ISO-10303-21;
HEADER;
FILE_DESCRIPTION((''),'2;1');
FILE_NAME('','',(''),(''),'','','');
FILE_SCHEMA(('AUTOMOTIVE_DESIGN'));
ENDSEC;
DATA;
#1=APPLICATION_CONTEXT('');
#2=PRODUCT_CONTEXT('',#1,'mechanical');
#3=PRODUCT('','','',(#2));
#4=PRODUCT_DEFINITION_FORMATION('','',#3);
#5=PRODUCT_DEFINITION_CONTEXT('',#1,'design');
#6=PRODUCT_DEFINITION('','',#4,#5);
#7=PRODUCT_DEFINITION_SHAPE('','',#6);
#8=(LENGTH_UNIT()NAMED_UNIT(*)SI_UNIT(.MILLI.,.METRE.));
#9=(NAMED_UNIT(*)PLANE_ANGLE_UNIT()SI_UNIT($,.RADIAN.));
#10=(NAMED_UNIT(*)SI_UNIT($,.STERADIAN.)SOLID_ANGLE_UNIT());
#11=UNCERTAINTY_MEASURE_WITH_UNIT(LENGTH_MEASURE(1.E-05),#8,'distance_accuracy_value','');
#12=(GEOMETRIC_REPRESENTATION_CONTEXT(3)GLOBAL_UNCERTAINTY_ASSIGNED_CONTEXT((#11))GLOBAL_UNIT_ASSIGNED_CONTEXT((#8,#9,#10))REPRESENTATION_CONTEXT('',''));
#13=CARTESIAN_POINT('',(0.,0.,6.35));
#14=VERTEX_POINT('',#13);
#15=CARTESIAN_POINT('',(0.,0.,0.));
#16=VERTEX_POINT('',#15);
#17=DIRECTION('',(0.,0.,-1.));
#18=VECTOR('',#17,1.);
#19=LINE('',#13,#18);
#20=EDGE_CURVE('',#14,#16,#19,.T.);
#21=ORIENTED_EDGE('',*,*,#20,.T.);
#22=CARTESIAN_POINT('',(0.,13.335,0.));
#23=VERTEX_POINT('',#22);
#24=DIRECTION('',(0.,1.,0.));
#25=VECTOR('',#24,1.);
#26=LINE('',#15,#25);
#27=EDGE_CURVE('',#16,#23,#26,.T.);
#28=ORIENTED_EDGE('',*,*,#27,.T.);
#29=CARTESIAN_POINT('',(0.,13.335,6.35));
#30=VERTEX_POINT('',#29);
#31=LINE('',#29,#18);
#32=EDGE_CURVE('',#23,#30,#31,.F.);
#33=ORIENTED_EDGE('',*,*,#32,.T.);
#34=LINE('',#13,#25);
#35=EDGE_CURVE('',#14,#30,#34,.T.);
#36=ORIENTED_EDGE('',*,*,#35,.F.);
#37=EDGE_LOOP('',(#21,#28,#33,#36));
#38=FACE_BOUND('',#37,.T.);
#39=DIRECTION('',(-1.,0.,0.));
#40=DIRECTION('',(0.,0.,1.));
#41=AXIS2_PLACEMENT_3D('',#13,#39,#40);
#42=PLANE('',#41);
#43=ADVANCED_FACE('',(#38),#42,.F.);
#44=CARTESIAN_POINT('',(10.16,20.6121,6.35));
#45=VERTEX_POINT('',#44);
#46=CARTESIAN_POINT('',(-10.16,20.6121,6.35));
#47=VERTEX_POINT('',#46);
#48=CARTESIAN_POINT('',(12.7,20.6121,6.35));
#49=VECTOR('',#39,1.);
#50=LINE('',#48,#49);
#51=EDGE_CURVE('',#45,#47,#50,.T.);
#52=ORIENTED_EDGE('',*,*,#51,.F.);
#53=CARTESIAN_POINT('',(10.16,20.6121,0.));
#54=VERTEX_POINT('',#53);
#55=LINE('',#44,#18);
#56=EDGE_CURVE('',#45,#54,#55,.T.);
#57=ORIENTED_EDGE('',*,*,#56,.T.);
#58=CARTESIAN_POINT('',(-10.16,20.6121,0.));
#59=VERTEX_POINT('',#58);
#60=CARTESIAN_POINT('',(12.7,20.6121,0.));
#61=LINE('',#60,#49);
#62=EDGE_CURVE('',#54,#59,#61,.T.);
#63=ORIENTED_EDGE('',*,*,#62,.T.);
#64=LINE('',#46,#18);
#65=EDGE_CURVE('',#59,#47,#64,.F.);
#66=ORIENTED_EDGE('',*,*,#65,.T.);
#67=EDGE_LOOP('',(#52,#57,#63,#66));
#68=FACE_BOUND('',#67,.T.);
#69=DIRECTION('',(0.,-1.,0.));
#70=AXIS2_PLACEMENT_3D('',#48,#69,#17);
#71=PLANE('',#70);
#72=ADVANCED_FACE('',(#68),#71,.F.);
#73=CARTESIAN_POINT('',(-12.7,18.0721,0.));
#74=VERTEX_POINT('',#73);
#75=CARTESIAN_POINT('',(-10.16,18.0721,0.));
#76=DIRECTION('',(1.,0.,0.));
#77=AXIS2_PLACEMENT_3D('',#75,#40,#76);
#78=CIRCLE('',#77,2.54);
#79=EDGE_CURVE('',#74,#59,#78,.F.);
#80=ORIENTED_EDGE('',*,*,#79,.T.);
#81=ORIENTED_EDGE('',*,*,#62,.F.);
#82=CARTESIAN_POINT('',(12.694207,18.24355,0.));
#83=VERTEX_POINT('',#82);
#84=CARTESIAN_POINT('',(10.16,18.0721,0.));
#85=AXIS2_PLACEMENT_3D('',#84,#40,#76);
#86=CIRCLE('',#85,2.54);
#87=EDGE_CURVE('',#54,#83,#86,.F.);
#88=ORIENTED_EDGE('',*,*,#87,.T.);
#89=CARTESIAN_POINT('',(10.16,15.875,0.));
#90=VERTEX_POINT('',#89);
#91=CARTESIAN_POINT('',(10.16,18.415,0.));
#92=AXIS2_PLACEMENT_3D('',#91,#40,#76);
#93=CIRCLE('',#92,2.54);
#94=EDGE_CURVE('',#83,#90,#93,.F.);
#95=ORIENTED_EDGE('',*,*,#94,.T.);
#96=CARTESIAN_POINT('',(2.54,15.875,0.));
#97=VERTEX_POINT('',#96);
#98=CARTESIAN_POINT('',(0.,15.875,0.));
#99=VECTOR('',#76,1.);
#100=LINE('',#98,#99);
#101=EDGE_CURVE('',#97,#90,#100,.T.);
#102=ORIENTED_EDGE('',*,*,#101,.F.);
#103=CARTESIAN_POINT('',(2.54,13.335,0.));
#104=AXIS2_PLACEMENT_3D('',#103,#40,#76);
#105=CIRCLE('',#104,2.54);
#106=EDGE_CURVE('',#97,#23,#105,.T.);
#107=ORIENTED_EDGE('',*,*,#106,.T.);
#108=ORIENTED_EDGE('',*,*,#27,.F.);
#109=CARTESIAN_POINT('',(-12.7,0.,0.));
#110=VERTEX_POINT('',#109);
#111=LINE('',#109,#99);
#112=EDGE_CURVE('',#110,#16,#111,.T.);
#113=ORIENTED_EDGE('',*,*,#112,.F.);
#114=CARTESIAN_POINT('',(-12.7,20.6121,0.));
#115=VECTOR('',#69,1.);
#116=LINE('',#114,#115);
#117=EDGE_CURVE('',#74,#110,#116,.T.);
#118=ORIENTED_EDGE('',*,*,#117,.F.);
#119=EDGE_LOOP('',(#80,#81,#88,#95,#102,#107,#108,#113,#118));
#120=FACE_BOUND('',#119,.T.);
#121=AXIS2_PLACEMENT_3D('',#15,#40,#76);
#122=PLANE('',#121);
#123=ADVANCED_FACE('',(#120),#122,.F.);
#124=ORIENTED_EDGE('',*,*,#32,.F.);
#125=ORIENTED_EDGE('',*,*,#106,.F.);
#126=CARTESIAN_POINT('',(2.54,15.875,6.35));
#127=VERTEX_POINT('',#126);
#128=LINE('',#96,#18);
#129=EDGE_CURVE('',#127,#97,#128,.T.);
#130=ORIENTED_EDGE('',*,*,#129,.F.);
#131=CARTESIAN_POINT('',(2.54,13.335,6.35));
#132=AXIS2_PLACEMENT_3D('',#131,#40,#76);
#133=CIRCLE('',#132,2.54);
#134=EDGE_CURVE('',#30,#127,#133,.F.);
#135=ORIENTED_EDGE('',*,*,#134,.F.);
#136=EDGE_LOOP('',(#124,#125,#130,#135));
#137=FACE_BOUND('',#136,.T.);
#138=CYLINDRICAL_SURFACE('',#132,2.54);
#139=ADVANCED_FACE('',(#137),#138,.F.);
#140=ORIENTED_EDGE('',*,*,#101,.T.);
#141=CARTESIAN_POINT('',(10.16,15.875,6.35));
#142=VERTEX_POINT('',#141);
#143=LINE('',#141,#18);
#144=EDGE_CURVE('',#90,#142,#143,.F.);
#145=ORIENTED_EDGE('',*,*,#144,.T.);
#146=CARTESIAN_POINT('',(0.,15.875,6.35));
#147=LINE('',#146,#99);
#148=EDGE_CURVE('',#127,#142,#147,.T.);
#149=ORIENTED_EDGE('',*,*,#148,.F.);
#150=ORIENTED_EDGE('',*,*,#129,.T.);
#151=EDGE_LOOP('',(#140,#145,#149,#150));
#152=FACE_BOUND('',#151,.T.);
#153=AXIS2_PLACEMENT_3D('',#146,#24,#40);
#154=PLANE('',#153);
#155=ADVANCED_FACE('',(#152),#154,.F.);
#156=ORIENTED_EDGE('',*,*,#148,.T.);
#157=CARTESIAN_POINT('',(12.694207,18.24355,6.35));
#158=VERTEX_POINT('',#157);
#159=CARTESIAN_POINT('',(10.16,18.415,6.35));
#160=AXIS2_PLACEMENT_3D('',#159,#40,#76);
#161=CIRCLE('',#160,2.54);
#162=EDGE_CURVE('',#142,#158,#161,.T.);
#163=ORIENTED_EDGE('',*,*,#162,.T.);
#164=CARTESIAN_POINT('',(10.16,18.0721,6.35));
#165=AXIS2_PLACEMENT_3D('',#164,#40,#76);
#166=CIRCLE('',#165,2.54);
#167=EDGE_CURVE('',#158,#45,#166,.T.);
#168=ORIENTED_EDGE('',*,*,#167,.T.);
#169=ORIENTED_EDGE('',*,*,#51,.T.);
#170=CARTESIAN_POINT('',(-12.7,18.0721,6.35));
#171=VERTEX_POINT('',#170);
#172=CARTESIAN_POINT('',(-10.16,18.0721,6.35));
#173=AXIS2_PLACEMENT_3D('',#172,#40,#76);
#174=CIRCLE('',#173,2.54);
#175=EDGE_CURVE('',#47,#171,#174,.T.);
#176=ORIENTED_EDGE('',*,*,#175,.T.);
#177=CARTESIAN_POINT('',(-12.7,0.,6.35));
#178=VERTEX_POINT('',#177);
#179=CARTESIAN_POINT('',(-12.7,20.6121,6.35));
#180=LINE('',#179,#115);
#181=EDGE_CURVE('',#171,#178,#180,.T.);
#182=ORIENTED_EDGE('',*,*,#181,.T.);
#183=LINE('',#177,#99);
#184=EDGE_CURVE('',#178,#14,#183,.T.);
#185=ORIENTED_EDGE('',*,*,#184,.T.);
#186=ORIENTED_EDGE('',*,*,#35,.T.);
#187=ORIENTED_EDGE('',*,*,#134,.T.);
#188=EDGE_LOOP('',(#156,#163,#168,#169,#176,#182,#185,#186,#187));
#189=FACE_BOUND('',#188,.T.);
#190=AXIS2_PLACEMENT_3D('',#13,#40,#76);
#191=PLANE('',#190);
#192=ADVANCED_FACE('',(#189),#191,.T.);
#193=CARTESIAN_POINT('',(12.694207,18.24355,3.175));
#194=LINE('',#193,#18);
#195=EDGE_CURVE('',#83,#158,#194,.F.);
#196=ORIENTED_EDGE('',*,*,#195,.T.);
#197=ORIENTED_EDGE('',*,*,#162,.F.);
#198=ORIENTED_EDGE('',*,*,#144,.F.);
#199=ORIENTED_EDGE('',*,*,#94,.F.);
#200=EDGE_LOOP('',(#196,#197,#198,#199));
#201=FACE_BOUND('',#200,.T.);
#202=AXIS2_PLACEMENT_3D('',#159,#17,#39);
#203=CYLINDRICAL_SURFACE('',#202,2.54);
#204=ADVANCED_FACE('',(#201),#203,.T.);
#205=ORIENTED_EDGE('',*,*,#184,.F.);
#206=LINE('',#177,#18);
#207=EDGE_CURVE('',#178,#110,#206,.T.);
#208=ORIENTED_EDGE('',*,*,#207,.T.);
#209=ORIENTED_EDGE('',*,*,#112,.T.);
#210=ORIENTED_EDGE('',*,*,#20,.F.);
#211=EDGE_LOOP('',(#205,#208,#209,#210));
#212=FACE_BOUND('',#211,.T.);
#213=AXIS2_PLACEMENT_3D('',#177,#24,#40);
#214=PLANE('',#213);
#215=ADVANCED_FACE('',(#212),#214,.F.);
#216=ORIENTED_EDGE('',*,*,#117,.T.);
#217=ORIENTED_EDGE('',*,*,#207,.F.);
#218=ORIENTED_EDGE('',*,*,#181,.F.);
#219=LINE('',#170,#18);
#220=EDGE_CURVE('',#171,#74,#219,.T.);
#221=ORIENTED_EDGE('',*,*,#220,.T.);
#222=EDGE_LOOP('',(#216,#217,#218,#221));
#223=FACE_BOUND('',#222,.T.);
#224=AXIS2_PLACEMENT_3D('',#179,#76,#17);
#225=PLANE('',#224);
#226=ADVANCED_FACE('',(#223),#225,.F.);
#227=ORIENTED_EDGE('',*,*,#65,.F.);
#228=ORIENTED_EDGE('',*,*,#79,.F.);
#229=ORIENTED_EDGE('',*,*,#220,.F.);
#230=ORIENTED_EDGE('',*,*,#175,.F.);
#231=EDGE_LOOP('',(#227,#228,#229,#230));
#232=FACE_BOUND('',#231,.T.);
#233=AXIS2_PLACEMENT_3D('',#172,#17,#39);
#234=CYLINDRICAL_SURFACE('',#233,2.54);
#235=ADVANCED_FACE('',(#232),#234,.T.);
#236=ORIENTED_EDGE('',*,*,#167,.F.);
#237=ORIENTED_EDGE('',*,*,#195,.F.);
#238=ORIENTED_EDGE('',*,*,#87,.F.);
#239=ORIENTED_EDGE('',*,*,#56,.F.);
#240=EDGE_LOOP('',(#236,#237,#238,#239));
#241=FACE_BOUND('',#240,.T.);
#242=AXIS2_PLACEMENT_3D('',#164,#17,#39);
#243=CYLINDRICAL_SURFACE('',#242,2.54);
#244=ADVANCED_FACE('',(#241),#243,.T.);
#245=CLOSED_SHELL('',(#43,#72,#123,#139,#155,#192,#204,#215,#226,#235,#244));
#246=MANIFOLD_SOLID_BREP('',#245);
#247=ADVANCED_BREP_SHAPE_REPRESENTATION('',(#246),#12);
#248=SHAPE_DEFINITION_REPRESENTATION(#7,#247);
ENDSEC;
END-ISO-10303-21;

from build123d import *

# Parameters (mm, degrees)
BOSS_EXTRUDE1_DEPTH = 6.35
FILLET1_R           = 2.54


with BuildPart() as part:
    # Sketch1 → Boss-Extrude1 (new body)
    with BuildSketch(Plane.XY):
        Polygon((0, 0), (0, 15.875), (12.7, 15.875), (12.7, 20.6121), (-12.7, 20.6121), (-12.7, 0), align=None)
    extrude(amount=BOSS_EXTRUDE1_DEPTH)

    # Fillet1
    # the kernel refuses this fillet: 2.54 mm, written as the material it adds along each edge
    with BuildSketch(Plane(origin=(0, 15.875, 0), x_dir=(0, -1, 0), z_dir=(0, 0, 1))) as fillet1_piece_1:
        with BuildLine():
            CenterArc((FILLET1_R, FILLET1_R), FILLET1_R, 180, 90)
            Line((0, FILLET1_R), (0, 0))
            Line((0, 0), (FILLET1_R, 0))
        make_face()
    extrude(amount=6.35)
    # the kernel refuses this fillet: 2.54 mm, written as the material it takes off along each edge
    with BuildSketch(Plane(origin=(12.7, 15.875, -6.35), x_dir=(-1, 0, 0), z_dir=(0, 0, 1)), Plane(origin=(12.7, 20.6121, -6.35), x_dir=(0, -1, 0), z_dir=(0, 0, 1)), Plane(origin=(-12.7, 20.6121, -6.35), x_dir=(1, 0, 0), z_dir=(0, 0, 1))) as fillet1_2_piece_1:
        with BuildLine():
            CenterArc((FILLET1_R, -FILLET1_R), FILLET1_R, 90, 90)
            Line((0, -FILLET1_R), (0, 0))
            Line((0, 0), (FILLET1_R, 0))
        make_face()
    extrude(amount=19.05, mode=Mode.SUBTRACT)


solid = part.part
